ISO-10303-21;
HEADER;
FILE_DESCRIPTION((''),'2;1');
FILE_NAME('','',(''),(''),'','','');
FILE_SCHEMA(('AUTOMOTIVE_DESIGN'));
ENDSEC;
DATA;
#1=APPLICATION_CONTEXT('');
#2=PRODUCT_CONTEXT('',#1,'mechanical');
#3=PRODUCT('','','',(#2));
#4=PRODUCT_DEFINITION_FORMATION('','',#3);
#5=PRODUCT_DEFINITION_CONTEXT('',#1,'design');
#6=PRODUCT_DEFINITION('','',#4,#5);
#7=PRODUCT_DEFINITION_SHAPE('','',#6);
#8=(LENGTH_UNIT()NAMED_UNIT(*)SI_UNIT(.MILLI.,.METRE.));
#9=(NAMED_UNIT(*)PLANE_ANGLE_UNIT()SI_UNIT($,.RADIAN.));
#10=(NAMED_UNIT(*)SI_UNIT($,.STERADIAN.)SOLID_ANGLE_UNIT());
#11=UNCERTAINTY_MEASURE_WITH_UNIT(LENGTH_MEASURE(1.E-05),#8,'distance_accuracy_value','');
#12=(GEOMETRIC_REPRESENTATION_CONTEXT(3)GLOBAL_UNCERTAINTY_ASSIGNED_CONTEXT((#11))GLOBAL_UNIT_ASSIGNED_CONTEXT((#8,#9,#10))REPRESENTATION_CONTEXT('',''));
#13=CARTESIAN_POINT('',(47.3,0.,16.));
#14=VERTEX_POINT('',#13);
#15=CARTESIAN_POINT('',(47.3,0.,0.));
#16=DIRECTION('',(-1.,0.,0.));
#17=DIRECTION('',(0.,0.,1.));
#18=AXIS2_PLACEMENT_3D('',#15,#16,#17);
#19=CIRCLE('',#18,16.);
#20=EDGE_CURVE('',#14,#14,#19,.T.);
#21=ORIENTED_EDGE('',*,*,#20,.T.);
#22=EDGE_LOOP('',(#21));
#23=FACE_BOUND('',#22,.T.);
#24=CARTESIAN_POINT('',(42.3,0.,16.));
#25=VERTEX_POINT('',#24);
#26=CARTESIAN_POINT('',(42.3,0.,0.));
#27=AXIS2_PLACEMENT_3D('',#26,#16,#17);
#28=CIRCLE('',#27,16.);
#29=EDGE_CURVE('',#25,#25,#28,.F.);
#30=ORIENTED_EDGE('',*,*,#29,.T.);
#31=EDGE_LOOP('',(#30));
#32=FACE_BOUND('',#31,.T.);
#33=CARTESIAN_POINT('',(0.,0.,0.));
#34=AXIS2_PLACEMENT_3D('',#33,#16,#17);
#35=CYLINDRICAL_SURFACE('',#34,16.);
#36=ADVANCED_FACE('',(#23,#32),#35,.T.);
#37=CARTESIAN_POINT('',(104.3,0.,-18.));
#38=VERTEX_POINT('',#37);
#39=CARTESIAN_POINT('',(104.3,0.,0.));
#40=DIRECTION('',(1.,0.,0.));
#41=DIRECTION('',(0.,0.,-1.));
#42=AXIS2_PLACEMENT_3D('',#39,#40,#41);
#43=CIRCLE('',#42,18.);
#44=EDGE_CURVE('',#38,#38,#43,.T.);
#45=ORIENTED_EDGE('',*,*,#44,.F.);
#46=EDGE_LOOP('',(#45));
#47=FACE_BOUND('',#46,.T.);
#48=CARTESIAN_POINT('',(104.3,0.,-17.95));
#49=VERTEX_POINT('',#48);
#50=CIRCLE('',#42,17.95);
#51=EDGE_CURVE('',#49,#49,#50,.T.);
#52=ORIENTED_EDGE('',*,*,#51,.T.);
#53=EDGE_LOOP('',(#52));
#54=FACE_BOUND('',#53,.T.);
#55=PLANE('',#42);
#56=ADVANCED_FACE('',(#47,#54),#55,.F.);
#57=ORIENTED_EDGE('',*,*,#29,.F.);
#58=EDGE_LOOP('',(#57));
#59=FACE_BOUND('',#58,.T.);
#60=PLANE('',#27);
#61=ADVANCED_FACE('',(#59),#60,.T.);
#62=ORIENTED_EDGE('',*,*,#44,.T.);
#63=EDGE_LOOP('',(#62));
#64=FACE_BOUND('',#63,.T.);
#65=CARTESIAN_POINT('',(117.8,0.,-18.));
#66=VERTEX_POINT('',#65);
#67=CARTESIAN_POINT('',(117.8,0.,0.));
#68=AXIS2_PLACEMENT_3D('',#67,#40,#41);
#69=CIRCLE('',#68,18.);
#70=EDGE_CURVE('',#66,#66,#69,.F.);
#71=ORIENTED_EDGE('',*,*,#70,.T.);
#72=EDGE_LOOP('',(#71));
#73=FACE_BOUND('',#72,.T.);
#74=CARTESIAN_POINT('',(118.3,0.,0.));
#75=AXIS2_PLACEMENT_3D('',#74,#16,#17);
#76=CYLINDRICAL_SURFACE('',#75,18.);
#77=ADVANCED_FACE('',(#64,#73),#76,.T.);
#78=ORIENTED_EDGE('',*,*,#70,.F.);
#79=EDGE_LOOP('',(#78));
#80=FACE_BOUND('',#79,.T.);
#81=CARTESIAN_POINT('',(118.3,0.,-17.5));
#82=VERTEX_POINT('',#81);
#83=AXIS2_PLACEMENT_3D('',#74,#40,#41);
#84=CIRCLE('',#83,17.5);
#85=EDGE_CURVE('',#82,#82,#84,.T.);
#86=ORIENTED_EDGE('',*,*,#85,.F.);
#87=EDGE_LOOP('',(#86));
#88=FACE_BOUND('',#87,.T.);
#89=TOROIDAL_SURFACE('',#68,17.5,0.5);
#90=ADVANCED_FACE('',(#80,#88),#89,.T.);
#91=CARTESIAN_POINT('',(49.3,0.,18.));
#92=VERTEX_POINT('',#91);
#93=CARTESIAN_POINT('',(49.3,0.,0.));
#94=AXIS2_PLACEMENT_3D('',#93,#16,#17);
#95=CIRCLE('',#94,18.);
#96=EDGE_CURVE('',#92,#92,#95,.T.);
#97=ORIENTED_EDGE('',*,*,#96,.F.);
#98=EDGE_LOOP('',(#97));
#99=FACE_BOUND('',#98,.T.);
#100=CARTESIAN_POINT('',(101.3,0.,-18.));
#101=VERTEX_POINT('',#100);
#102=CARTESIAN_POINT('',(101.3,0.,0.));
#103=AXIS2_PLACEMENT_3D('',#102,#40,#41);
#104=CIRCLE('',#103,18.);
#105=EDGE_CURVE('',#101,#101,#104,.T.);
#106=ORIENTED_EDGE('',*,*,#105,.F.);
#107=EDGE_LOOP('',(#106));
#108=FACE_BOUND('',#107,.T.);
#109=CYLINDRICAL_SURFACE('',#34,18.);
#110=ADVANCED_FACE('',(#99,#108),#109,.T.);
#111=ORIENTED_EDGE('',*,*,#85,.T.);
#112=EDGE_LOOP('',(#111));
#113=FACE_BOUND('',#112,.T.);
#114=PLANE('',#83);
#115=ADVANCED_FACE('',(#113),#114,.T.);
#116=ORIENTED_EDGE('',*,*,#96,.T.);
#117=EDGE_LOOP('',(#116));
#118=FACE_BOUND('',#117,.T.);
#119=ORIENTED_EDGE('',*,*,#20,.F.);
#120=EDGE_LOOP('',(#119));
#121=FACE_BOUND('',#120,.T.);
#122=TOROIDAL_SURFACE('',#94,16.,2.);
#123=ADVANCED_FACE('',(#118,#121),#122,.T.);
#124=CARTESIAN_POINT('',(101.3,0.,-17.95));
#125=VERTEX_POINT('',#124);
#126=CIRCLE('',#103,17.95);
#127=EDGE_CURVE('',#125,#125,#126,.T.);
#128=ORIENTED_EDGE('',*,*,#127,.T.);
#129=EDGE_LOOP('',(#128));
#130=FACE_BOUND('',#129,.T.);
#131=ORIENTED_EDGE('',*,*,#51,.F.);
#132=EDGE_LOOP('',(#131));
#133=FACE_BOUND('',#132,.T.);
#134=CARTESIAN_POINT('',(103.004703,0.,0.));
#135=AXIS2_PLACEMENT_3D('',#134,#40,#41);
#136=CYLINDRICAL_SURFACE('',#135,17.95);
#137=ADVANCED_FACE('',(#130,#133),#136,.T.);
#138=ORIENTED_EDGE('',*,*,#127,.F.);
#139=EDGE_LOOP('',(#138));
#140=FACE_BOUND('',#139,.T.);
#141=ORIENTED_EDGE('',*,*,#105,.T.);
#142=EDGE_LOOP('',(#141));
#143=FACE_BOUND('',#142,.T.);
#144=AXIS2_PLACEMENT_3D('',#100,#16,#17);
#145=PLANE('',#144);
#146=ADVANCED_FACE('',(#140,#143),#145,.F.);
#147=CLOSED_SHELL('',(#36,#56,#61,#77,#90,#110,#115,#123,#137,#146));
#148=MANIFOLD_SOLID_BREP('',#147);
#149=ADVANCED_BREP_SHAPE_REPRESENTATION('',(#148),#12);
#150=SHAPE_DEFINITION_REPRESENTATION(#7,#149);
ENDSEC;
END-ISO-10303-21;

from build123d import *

# Parameters (mm, degrees)
SKETCH_1_W               = 16.3
SKETCH_1_H               = 3
SKETCH_1_W_2             = 5
SKETCH_1_H_2             = 16
SKETCH_19_W              = 3
SKETCH_19_H              = 0.05
EXTRUDE_START            = 14
SKETCH_20_R              = 18
EXTRUDE_2_DEPTH          = 14
CUT_EXTRUDE_6_DEPTH      = 3
CUT_EXTRUDE_4_DEPTH      = 12
SKETCH_13_R              = 1.5
CUT_EXTRUDE_8_DEPTH      = 7
PATTERN_CIRCULAR_2_COUNT = 4
FILLET_1_R               = 0.5
SKETCH_21_R              = 20
CUT_EXTRUDE_7_DEPTH      = 42.3


with BuildPart() as part:
    # Эскиз1 → Повернуть1 основной корпус (revolve)
    with BuildSketch(Plane(origin=(0, 0, 0), x_dir=(1, 0, 0), z_dir=(0, 1, 0)), mode=Mode.PRIVATE) as revolve_1_sk:
        with Locations((8.15, 1.5)):
            Rectangle(SKETCH_1_W, SKETCH_1_H)
        Polygon((16.3, 0), (19.3, 0), (19.3, 10), (16.3, 10), (16.3, 3), align=None)
        Polygon((24.3, 0), (24.3, 16), (20.3, 16), (19.3, 15), (19.3, 10), (19.3, 0), align=None)
        Polygon((40.8, 17.5), (42.3, 16), (42.3, 0), (24.3, 0), (24.3, 16), (25.8, 17.5), align=None)
        with Locations((44.8, 8)):
            Rectangle(SKETCH_1_W_2, SKETCH_1_H_2)
        with BuildLine():
            ThreePointArc((47.3, 16), (47.885786438, 17.414213562), (49.3, 18))
            Line((49.3, 18), (104.3, 18))
            Line((104.3, 18), (104.3, 0))
            Line((104.3, 0), (47.3, 0))
            Line((47.3, 0), (47.3, 16))
        make_face()
    revolve(revolve_1_sk.sketch.rotate(Axis((0, 0, 0), (1, 0, 0)), 180), axis=Axis((0, 0, 0), (1, 0, 0)))

    # Эскиз19 → Вырез-Повернуть2 пластиковая часть (revolve, cut)
    with BuildSketch(Plane(origin=(0, 0, 0), x_dir=(1, 0, 0), z_dir=(0, 1, 0)), mode=Mode.PRIVATE) as cut_revolve_2_sk:
        with Locations((102.8, 17.975)):
            Rectangle(SKETCH_19_W, SKETCH_19_H)
    revolve(cut_revolve_2_sk.sketch.rotate(Axis((103.004702911, 0, 0), (-1, 0, 0)), 180), axis=Axis((103.004702911, 0, 0), (-1, 0, 0)), mode=Mode.SUBTRACT)

    # Эскиз20 → Бобышка-Вытянуть2 пластиковая крышка контактов (add)
    with BuildSketch(Plane(origin=(104.3, 0, 0), x_dir=(0, 0, -1), z_dir=(1, 0, 0)).offset(EXTRUDE_START)):
        with Locations(Location((0, 0, 0), (0, 0, 180))):
            Circle(SKETCH_20_R)
    extrude(amount=-EXTRUDE_2_DEPTH)

    # Эскиз11 → Вырез-Вытянуть6 (cut)
    with BuildSketch(Plane.ZY.offset(-16.3)):
        with BuildLine():
            ThreePointArc((4.358898944, 9), (0, 10), (-4.358898944, 9))
            Line((-4.358898944, 9), (4.358898944, 9))
        make_face()
        with BuildLine():
            Line((4.358898944, -9), (-4.358898944, -9))
            ThreePointArc((-4.358898944, -9), (0, -10), (4.358898944, -9))
        make_face()
    extrude(amount=-CUT_EXTRUDE_6_DEPTH, mode=Mode.SUBTRACT)

    # Эскиз6 → Вырез-Вытянуть4 на оси (cut)
    with BuildSketch(Plane.ZY):
        with BuildLine():
            Line((-1.75306936, 2.434491286), (1.561110291, 2.561822527))
            ThreePointArc((1.561110291, 2.561822527), (-0.115175441, 2.997788288), (-1.75306936, 2.434491286))
        make_face()
    extrude(amount=-CUT_EXTRUDE_4_DEPTH, mode=Mode.SUBTRACT)

    # Эскиз13 → Вырез-Вытянуть8 для винтов (cut)
    with BuildSketch(Plane.ZY.offset(-19.3)):
        with Locations((-9.192388155, 9.192388155)):
            Circle(SKETCH_13_R)
    cut_extrude_8 = extrude(amount=-CUT_EXTRUDE_8_DEPTH, mode=Mode.SUBTRACT)

    # Круговой массив2 для винтов: Вырез-Вытянуть8 для винтов ×4 about axis
    pattern_circular_2_axis = Axis((0, 0, 0), (1, 0, 0))
    for i in range(1, PATTERN_CIRCULAR_2_COUNT):
        add(cut_extrude_8.rotate(pattern_circular_2_axis, i * 360 / PATTERN_CIRCULAR_2_COUNT), mode=Mode.SUBTRACT)

    # Скругление1
    # the kernel refuses this fillet: 0.5 mm, written as the material it takes off along each edge
    with BuildSketch(Plane(origin=(19.3, 0, 0), x_dir=(0, 0, 1), z_dir=(0, 1, 0))) as fillet_1_piece_1:
        with BuildLine():
            CenterArc((15 - FILLET_1_R * 0.414213562373, FILLET_1_R), FILLET_1_R, 270, 45)
            Line((15 - FILLET_1_R * 0.414213562373, 0), (15, 0))
            Line((15, 0), (15 + FILLET_1_R * 0.292893218813, FILLET_1_R * 0.292893218813))
        make_face()
    revolve(axis=Axis((19.3, 0, 0), (1, 0, 0)), mode=Mode.SUBTRACT)
    with BuildSketch(Plane(origin=(118.3, 0, 0), x_dir=(0, 0, 1), z_dir=(0, 1, 0))) as fillet_1_piece_2:
        with BuildLine():
            CenterArc((18 - FILLET_1_R, -FILLET_1_R), FILLET_1_R, 0, 90)
            Line((18 - FILLET_1_R, 0), (18, 0))
            Line((18, 0), (18, -FILLET_1_R))
        make_face()
    revolve(axis=Axis((118.3, 0, 0), (1, 0, 0)), mode=Mode.SUBTRACT)
    with BuildSketch(Plane(origin=(16.001803864, 9, -4.358898944), x_dir=(0, 0, 1), z_dir=(1, 0, 0))) as fillet_1_piece_3:
        with BuildLine():
            CenterArc((0.116258256, 0.5), FILLET_1_R, 243.474647983, 26.525352017)
            ThreePointArc((-0.107038622, 0.052631579), (-0.053597784, 0.026156196), (0, 0))
            Line((0, 0), (0.116258256, 0))
        make_face()
    extrude(amount=3.298196136, mode=Mode.SUBTRACT)
    with BuildSketch(Plane(origin=(16.001803864, 9, 4.358898944), x_dir=(0, -0.4412496727830022, 0.8973843804462464), z_dir=(1, 0, 0))) as fillet_1_piece_4:
        with BuildLine():
            CenterArc((0.116296493, 0.499991108), FILLET_1_R, 243.81635761, 26.525352017)
            Line((-0.104328343, 0.051298918), (0, 0))
            ThreePointArc((0, 0), (0.059639227, -0.000177843), (0.119278454, 0))
        make_face()
    extrude(amount=3.298196136, mode=Mode.SUBTRACT)
    with BuildSketch(Plane(origin=(16.3, 9, -5.608898944), x_dir=(1, 0, 0), z_dir=(0, 0, 1)), Plane(origin=(16.3, -9, 5.608898944), x_dir=(1, 0, 0), z_dir=(0, 0, -1))) as fillet_1_piece_5:
        with BuildLine():
            CenterArc((FILLET_1_R, -FILLET_1_R), FILLET_1_R, 90, 90)
            Line((0, -FILLET_1_R), (0, 0))
            Line((0, 0), (FILLET_1_R, 0))
        make_face()
    extrude(amount=11.217797887, mode=Mode.SUBTRACT)
    with BuildSketch(Plane(origin=(16.001803864, -9, 4.358898944), x_dir=(0, 0.4412496727830018, 0.8973843804462466), z_dir=(1, 0, 0))) as fillet_1_piece_6:
        with BuildLine():
            CenterArc((0.116296493, -0.499991108), FILLET_1_R, 89.658290373, 26.525352017)
            Line((-0.104328343, -0.051298918), (0, 0))
            ThreePointArc((0, 0), (0.059639227, 0.000177843), (0.119278454, 0))
        make_face()
    extrude(amount=3.298196136, mode=Mode.SUBTRACT)
    with BuildSketch(Plane(origin=(16.001803864, -9, -4.358898944), x_dir=(0, 0, 1), z_dir=(1, 0, 0))) as fillet_1_piece_7:
        with BuildLine():
            CenterArc((0.116258256, -0.5), FILLET_1_R, 90, 26.525352017)
            ThreePointArc((-0.107038622, -0.052631579), (-0.053597784, -0.026156196), (0, 0))
            Line((0, 0), (0.116258256, 0))
        make_face()
    extrude(amount=3.298196136, mode=Mode.SUBTRACT)
    with BuildSketch(Plane(origin=(19.3, 9.192388155, -9.192388155), x_dir=(0, 0, 1), z_dir=(0, -1, 0))) as fillet_1_piece_8:
        with BuildLine():
            CenterArc((1.5 + FILLET_1_R, -FILLET_1_R), FILLET_1_R, 90, 90)
            Line((1.5, -FILLET_1_R), (1.5, 0))
            Line((1.5, 0), (1.5 + FILLET_1_R, 0))
        make_face()
    revolve(axis=Axis((19.3, 9.192388155, -9.192388155), (-1, 0, 0)), mode=Mode.SUBTRACT)
    with BuildSketch(Plane(origin=(19.3, -9.192388155, -9.192388155), x_dir=(0, 1, 0), z_dir=(0, 0, 1))) as fillet_1_piece_9:
        with BuildLine():
            CenterArc((1.5 + FILLET_1_R, -FILLET_1_R), FILLET_1_R, 90, 90)
            Line((1.5, -FILLET_1_R), (1.5, 0))
            Line((1.5, 0), (1.5 + FILLET_1_R, 0))
        make_face()
    revolve(axis=Axis((19.3, -9.192388155, -9.192388155), (-1, 0, 0)), mode=Mode.SUBTRACT)
    with BuildSketch(Plane(origin=(19.3, -9.192388155, 9.192388155), x_dir=(0, 0, -1), z_dir=(0, 1, 0))) as fillet_1_piece_10:
        with BuildLine():
            CenterArc((1.5 + FILLET_1_R, -FILLET_1_R), FILLET_1_R, 90, 90)
            Line((1.5, -FILLET_1_R), (1.5, 0))
            Line((1.5, 0), (1.5 + FILLET_1_R, 0))
        make_face()
    revolve(axis=Axis((19.3, -9.192388155, 9.192388155), (-1, 0, 0)), mode=Mode.SUBTRACT)
    with BuildSketch(Plane(origin=(19.3, 9.192388155, 9.192388155), x_dir=(0, -1, 0), z_dir=(0, 0, -1))) as fillet_1_piece_11:
        with BuildLine():
            CenterArc((1.5 + FILLET_1_R, -FILLET_1_R), FILLET_1_R, 90, 90)
            Line((1.5, -FILLET_1_R), (1.5, 0))
            Line((1.5, 0), (1.5 + FILLET_1_R, 0))
        make_face()
    revolve(axis=Axis((19.3, 9.192388155, 9.192388155), (-1, 0, 0)), mode=Mode.SUBTRACT)
    # the kernel refuses this fillet: 0.5 mm, written as the material it adds along each edge
    with BuildSketch(Plane(origin=(19.3, 0, 0), x_dir=(0, -0.8947368421052432, -0.4465937565389121), z_dir=(0, -0.4465937565389121, 0.8947368421052432))) as fillet_1_2_piece_1:
        with BuildLine():
            CenterArc((10 + FILLET_1_R, -FILLET_1_R), FILLET_1_R, 90, 90)
            Line((10, -FILLET_1_R), (10, 0))
            Line((10, 0), (10 + FILLET_1_R, 0))
        make_face()
    revolve(axis=Axis((19.3, 0, 0), (1, 0, 0)), revolution_arc=126.949295967)
    with BuildSketch(Plane(origin=(19.3, 9, -4.242640687), x_dir=(0, 1, 0), z_dir=(0, 0, 1)), Plane(origin=(19.3, -9, 4.242640687), x_dir=(0, -1, 0), z_dir=(0, 0, -1))) as fillet_1_2_piece_2:
        with BuildLine():
            CenterArc((FILLET_1_R, FILLET_1_R), FILLET_1_R, 180, 90)
            Line((0, FILLET_1_R), (0, 0))
            Line((0, 0), (FILLET_1_R, 0))
        make_face()
    extrude(amount=8.485281374)
    with BuildSketch(Plane(origin=(19.3, 0, 0), x_dir=(0, 0.894736842105243, 0.44659375653891253), z_dir=(0, 0.44659375653891253, -0.894736842105243))) as fillet_1_2_piece_3:
        with BuildLine():
            CenterArc((10 + FILLET_1_R, -FILLET_1_R), FILLET_1_R, 90, 90)
            Line((10, -FILLET_1_R), (10, 0))
            Line((10, 0), (10 + FILLET_1_R, 0))
        make_face()
    revolve(axis=Axis((19.3, 0, 0), (1, 0, 0)), revolution_arc=126.949295967)
    with BuildSketch(Plane(origin=(19.3, -8.5, 4.242640687), x_dir=(0, -0.8947368421052433, 0.446593756538912), z_dir=(0, 0.446593756538912, 0.8947368421052433))) as fillet_1_2_piece_4:
        with BuildLine():
            CenterArc((0.5 + FILLET_1_R, -FILLET_1_R), FILLET_1_R, 90, 90)
            Line((0.5, -FILLET_1_R), (0.5, 0))
            Line((0.5, 0), (0.5 + FILLET_1_R, 0))
        make_face()
    revolve(axis=Axis((19.3, -8.5, 4.242640687), (1, 0, 0)), revolution_arc=26.525352017)
    with BuildSketch(Plane(origin=(19.3, -8.5, -4.242640687), x_dir=(0, -1, 0), z_dir=(0, 0, 1))) as fillet_1_2_piece_5:
        with BuildLine():
            CenterArc((0.5 + FILLET_1_R, -FILLET_1_R), FILLET_1_R, 90, 90)
            Line((0.5, -FILLET_1_R), (0.5, 0))
            Line((0.5, 0), (0.5 + FILLET_1_R, 0))
        make_face()
    revolve(axis=Axis((19.3, -8.5, -4.242640687), (1, 0, 0)), revolution_arc=26.525352017)
    with BuildSketch(Plane(origin=(19.3, 8.5, 4.242640687), x_dir=(0, 0.8947368421052433, 0.446593756538912), z_dir=(0, -0.446593756538912, 0.8947368421052433))) as fillet_1_2_piece_6:
        with BuildLine():
            CenterArc((0.5 + FILLET_1_R, FILLET_1_R), FILLET_1_R, 180, 90)
            Line((0.5, FILLET_1_R), (0.5, 0))
            Line((0.5, 0), (0.5 + FILLET_1_R, 0))
        make_face()
    revolve(axis=Axis((19.3, 8.5, 4.242640687), (-1, 0, 0)), revolution_arc=26.525352017)
    with BuildSketch(Plane(origin=(19.3, 8.5, -4.242640687), x_dir=(0, 1, 0), z_dir=(0, 0, 1))) as fillet_1_2_piece_7:
        with BuildLine():
            CenterArc((0.5 + FILLET_1_R, FILLET_1_R), FILLET_1_R, 180, 90)
            Line((0.5, FILLET_1_R), (0.5, 0))
            Line((0.5, 0), (0.5 + FILLET_1_R, 0))
        make_face()
    revolve(axis=Axis((19.3, 8.5, -4.242640687), (-1, 0, 0)), revolution_arc=26.525352017)

    # Эскиз21 → Вырез-Вытянуть7 (cut)
    with BuildSketch(Plane.ZY):
        Circle(SKETCH_21_R)
    extrude(amount=-CUT_EXTRUDE_7_DEPTH, mode=Mode.SUBTRACT)


solid = part.part
